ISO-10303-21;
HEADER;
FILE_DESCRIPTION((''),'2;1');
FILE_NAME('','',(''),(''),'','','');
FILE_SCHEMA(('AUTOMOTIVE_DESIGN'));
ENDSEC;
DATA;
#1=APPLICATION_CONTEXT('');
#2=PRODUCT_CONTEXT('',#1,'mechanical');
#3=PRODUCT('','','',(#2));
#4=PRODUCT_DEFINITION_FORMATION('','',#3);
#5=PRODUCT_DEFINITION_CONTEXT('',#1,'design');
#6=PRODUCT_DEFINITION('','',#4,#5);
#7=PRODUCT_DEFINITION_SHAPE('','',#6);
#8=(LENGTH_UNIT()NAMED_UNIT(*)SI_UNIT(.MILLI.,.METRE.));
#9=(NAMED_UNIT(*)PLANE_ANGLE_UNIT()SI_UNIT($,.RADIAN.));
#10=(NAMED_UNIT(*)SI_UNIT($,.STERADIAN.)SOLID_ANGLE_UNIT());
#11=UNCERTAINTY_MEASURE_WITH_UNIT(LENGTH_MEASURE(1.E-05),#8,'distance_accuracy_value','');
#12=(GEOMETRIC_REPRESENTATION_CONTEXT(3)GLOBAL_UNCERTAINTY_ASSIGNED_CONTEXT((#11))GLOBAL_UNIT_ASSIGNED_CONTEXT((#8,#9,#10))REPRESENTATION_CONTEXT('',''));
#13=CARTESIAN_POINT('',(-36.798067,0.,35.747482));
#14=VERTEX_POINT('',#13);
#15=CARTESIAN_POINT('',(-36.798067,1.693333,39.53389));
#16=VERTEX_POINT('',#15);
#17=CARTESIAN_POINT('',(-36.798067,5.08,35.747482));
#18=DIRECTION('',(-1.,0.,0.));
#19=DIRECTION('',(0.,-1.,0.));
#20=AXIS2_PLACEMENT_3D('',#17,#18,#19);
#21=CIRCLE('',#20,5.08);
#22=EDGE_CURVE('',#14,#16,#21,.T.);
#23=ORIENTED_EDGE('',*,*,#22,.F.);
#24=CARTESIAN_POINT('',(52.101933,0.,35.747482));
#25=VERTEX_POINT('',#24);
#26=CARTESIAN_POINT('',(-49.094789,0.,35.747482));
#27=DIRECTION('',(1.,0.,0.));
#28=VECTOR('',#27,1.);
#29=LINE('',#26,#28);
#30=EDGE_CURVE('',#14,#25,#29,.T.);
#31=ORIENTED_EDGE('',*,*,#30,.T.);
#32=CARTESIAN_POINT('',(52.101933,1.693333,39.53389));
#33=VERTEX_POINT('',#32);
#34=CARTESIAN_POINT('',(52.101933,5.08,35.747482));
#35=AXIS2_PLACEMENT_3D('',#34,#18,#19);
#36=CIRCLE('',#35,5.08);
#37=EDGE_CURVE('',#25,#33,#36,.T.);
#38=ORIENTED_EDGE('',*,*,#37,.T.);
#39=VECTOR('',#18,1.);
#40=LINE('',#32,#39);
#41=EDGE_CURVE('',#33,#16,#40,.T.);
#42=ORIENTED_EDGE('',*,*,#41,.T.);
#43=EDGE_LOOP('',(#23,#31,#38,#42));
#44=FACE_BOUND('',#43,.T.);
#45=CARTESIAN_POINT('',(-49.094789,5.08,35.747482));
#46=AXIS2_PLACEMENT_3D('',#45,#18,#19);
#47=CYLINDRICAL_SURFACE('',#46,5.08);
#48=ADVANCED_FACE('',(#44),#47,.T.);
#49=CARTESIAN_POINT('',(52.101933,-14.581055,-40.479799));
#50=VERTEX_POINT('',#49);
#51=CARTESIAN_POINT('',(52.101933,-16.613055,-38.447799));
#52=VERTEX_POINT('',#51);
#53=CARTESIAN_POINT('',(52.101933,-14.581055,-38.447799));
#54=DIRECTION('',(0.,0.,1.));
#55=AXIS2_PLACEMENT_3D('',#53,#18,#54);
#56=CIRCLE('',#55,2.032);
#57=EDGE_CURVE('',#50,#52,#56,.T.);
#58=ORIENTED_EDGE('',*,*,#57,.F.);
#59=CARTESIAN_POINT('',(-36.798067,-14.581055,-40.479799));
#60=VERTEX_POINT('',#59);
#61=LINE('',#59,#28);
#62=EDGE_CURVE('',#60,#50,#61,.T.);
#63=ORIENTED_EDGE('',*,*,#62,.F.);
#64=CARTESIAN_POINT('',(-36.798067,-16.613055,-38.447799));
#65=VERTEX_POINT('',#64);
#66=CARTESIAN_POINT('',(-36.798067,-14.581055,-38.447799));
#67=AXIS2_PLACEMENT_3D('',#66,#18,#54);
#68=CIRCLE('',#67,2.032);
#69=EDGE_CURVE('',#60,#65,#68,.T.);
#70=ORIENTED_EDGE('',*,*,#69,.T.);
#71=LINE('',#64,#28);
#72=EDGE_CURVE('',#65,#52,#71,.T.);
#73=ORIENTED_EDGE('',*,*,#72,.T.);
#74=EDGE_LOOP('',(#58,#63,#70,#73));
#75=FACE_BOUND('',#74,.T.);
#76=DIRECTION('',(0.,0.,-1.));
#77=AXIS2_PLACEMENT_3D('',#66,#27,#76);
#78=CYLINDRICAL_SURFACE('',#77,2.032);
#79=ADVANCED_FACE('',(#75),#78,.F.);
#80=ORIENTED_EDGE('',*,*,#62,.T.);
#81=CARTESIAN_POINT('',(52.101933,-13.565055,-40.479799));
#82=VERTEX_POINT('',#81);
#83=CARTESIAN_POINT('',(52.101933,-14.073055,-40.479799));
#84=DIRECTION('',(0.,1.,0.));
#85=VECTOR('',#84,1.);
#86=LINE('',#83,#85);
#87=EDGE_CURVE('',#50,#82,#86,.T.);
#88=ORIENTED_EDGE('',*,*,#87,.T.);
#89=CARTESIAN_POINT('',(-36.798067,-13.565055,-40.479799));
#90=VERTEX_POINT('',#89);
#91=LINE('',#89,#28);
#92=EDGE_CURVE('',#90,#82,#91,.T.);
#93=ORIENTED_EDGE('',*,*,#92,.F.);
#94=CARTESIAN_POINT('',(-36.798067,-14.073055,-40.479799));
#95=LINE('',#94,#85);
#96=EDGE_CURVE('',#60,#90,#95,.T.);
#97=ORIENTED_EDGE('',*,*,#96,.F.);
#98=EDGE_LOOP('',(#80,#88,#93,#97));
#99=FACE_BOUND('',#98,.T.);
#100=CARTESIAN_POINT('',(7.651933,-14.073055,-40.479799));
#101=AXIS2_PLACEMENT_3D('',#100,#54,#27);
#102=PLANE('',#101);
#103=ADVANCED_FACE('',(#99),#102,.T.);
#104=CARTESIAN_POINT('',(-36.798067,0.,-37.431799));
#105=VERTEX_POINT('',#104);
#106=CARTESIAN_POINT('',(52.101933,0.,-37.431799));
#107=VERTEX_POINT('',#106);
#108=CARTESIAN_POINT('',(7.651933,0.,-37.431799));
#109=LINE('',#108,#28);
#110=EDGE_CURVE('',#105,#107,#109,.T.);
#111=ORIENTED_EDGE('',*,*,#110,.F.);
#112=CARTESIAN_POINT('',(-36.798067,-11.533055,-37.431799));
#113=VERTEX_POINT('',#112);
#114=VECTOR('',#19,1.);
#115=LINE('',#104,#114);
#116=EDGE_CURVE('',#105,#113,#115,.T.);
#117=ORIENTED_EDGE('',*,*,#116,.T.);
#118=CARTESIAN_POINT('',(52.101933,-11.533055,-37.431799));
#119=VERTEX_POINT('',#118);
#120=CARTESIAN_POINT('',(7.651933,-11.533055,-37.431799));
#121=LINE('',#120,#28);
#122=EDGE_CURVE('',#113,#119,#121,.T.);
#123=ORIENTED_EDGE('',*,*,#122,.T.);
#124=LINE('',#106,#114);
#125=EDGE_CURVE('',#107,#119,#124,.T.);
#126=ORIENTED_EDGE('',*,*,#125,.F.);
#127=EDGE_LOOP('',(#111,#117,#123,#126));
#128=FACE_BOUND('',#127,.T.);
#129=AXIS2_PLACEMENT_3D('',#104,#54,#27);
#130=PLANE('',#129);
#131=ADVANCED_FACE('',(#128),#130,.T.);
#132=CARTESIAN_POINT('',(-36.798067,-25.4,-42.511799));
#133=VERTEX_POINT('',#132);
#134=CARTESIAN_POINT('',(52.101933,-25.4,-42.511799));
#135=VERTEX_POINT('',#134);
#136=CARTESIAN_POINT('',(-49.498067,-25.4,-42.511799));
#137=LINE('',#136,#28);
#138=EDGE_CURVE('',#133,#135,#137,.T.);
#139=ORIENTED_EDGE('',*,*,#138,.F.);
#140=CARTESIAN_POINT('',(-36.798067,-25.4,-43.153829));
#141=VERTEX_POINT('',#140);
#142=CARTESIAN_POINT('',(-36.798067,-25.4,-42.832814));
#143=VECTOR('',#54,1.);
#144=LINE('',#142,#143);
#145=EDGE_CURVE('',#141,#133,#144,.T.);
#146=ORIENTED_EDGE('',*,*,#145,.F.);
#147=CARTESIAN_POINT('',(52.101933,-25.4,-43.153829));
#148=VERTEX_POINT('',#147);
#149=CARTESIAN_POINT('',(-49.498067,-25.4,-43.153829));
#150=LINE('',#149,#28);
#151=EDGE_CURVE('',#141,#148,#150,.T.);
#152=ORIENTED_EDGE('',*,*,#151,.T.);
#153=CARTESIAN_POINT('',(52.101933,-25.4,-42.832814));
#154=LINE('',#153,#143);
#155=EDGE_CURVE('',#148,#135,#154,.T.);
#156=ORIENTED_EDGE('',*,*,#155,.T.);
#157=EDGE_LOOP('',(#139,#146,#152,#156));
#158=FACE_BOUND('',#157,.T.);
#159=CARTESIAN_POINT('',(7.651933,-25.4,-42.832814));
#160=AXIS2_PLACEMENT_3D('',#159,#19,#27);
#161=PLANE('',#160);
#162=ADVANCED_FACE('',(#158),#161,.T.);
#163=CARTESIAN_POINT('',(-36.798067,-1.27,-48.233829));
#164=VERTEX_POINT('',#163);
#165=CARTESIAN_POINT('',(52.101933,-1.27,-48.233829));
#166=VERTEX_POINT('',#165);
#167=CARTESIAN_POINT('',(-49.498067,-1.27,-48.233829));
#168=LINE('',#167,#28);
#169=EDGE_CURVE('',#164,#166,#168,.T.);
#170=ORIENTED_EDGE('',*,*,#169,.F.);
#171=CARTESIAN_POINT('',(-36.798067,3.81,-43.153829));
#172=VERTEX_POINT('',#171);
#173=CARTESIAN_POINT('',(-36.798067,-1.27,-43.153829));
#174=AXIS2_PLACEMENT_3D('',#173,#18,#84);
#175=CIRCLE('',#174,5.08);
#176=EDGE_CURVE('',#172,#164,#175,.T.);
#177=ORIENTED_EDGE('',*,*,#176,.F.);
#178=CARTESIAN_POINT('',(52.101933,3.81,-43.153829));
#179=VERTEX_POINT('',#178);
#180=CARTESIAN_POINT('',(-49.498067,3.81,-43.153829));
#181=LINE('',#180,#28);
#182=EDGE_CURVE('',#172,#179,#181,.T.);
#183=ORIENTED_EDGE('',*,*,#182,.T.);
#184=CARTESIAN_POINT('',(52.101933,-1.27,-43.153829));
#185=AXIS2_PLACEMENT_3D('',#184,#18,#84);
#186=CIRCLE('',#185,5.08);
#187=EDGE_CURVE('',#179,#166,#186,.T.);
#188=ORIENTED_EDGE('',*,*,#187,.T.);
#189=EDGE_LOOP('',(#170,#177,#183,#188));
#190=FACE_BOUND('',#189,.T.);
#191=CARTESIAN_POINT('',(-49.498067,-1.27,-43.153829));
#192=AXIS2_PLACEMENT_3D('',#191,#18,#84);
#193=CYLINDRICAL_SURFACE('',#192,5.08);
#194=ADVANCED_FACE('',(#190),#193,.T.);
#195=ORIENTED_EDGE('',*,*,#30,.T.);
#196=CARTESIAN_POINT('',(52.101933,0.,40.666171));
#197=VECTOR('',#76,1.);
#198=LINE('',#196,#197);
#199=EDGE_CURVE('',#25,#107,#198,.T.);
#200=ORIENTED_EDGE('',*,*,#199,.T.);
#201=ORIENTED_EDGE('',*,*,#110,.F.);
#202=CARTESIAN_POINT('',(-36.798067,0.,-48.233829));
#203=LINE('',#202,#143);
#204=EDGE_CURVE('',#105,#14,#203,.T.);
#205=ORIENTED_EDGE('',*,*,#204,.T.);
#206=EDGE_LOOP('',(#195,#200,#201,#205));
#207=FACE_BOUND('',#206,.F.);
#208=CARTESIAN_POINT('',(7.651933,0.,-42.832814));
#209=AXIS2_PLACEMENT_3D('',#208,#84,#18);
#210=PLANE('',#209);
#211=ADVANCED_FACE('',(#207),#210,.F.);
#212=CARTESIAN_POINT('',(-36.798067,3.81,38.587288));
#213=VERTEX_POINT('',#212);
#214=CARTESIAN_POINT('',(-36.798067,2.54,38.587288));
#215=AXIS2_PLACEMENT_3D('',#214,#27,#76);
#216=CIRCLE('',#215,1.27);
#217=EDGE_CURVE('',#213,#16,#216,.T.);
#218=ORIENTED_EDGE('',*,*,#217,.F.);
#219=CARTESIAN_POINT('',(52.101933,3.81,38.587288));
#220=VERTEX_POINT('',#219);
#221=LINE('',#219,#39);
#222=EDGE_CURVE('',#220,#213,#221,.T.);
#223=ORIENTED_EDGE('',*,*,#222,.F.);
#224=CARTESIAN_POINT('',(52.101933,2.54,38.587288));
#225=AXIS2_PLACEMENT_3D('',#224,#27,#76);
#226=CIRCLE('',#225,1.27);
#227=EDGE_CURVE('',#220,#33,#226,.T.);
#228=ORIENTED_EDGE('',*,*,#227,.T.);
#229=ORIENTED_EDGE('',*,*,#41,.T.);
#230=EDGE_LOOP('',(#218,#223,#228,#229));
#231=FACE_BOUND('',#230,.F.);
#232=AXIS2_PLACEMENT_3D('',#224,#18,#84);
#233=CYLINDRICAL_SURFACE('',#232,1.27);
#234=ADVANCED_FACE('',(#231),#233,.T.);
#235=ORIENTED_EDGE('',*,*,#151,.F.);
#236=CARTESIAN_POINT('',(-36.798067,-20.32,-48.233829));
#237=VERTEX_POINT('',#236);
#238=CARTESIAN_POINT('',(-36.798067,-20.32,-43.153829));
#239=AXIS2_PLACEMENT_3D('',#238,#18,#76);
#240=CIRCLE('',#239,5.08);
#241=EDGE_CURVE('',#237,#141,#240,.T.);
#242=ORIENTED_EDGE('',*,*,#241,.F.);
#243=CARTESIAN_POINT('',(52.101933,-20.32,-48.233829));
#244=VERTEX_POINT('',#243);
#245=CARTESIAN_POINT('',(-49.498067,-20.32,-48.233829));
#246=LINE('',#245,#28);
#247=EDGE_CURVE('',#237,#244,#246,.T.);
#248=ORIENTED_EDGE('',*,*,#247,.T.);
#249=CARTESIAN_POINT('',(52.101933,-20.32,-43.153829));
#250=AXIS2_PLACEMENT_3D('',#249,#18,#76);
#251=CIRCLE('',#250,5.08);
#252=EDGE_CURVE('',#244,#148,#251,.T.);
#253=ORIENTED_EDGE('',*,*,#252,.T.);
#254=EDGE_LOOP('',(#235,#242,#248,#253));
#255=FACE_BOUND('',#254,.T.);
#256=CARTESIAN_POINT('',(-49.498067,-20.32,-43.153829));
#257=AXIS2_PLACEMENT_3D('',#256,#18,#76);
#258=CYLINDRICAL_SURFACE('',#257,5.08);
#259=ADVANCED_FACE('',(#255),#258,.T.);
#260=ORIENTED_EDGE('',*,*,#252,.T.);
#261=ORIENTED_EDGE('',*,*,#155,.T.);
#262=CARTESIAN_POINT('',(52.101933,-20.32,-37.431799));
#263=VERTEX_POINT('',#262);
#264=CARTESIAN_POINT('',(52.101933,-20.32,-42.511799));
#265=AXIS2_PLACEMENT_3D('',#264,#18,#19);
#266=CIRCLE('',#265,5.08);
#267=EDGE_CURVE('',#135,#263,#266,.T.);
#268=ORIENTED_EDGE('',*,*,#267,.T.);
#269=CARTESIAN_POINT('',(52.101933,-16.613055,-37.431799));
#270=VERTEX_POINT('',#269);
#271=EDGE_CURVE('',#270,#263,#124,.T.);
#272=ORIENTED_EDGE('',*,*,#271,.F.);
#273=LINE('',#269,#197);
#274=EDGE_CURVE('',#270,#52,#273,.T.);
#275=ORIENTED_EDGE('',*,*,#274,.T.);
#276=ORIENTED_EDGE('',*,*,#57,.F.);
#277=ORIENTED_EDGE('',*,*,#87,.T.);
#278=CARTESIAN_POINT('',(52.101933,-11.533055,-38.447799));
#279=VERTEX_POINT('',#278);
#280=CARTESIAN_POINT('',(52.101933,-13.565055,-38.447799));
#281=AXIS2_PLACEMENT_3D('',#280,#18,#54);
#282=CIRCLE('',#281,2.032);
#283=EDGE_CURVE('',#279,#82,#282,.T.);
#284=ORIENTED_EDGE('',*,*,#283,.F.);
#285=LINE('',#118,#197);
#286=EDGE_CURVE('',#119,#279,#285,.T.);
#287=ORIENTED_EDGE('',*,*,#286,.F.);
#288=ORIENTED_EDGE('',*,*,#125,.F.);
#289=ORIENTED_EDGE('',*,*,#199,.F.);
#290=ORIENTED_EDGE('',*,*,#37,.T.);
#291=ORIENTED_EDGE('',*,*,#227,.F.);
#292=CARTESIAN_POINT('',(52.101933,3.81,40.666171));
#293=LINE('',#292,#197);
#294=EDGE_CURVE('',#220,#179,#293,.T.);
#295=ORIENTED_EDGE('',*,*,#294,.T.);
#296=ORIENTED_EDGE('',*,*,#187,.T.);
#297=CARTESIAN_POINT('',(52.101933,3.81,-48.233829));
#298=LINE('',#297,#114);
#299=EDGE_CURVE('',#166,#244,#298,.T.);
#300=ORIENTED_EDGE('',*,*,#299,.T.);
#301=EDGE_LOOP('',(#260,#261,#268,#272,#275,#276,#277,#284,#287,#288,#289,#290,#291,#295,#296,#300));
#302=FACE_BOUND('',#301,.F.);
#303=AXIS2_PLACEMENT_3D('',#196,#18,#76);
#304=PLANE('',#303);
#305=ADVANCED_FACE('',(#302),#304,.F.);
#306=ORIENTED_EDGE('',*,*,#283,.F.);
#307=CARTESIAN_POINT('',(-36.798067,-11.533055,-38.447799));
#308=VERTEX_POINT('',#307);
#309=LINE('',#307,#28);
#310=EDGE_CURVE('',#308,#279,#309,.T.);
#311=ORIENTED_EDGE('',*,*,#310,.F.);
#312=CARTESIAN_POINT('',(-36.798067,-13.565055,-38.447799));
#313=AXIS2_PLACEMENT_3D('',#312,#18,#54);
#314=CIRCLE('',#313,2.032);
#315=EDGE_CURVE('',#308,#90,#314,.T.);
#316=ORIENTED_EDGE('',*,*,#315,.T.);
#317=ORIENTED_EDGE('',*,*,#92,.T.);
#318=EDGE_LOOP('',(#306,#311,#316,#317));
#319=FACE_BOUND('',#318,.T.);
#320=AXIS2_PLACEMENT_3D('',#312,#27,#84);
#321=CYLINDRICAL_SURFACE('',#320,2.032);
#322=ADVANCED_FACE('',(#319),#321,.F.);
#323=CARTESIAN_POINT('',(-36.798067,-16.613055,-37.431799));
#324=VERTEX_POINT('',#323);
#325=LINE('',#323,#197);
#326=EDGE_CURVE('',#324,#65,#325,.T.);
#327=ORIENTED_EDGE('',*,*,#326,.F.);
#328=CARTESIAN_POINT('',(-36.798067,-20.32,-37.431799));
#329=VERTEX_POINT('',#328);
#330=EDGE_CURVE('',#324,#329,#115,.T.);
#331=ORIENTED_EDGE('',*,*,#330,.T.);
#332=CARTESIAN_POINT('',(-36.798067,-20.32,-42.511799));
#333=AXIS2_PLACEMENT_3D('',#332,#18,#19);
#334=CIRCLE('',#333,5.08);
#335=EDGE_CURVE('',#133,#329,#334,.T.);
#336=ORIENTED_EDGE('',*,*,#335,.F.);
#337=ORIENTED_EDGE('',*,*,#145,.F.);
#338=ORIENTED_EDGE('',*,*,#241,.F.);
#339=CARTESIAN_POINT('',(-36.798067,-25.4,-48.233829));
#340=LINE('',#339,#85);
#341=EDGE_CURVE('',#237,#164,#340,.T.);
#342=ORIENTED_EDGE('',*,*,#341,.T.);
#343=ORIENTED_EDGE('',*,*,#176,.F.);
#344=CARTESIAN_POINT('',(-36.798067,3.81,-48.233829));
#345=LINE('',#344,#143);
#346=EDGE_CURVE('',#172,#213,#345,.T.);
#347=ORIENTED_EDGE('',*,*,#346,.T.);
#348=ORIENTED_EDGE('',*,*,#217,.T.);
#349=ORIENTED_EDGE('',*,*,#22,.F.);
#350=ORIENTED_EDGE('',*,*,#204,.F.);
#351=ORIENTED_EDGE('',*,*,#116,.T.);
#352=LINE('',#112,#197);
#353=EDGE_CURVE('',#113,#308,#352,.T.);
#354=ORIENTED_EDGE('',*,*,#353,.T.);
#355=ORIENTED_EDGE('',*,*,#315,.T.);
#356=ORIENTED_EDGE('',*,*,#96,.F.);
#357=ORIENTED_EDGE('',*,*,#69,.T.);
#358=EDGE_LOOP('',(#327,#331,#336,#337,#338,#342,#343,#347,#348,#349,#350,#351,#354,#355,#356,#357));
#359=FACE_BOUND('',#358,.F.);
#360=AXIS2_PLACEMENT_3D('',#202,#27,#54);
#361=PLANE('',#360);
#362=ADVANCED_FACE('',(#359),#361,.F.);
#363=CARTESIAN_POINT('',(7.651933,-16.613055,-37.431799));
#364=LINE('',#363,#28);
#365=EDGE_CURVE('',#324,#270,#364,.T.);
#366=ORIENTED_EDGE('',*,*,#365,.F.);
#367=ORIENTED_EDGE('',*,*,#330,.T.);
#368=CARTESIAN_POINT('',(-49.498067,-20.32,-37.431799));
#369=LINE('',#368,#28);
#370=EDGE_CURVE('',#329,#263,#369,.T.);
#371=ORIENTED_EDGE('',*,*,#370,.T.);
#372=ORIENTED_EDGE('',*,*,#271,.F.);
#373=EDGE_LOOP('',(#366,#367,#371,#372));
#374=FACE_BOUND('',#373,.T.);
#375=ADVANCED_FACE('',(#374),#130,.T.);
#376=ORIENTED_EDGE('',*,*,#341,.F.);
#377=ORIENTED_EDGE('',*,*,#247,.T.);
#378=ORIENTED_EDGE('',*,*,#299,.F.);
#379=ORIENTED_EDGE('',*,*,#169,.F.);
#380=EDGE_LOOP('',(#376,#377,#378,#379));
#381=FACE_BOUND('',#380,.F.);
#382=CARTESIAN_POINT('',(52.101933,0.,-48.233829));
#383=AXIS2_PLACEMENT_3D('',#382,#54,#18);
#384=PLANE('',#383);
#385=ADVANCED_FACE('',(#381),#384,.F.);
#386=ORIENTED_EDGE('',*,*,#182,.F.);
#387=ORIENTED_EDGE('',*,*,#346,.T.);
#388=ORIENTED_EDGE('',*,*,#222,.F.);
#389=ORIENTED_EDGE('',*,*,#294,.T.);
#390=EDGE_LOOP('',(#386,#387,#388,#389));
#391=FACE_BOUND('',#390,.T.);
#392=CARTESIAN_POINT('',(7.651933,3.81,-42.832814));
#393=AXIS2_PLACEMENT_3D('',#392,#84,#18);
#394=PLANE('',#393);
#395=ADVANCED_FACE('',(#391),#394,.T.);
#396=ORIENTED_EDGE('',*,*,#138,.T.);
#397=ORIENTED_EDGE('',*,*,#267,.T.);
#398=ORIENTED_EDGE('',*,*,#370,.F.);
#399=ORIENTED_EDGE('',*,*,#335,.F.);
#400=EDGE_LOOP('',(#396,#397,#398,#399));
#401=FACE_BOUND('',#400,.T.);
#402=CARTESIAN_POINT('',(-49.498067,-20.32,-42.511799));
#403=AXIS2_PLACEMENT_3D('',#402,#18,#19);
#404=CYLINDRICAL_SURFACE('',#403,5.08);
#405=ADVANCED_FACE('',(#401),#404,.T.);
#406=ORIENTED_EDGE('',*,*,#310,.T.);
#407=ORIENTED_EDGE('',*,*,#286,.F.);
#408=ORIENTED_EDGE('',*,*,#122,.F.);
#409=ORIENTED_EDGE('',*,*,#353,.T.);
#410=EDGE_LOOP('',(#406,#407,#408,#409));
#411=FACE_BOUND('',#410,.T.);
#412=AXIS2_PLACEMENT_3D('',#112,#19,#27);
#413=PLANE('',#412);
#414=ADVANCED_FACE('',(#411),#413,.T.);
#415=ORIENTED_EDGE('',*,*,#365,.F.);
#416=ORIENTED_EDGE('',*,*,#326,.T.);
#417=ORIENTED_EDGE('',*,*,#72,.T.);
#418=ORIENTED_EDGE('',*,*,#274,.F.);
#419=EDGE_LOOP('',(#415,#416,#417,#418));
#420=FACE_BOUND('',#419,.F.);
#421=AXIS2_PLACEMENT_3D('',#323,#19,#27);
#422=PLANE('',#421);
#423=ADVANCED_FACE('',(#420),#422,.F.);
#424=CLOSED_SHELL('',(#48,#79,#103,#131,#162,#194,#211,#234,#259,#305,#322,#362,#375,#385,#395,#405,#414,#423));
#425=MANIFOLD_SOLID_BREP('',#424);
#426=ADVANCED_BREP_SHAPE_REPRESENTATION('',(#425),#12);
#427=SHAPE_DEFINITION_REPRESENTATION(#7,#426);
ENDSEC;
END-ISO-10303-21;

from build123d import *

# Parameters (mm, degrees)
F0_W        = 88.9
F0_H        = 10.8020305634
F1_DEPTH    = 25.4
F3_W        = 88.9
F3_H        = 10.8020305634
F3_H_2      = 78.0979694366
F4_DEPTH    = 3.81
F5_W        = 88.9
F5_H        = 5.08
F6_DEPTH    = 3.048
F7_T1_DEPTH = 113.4934442484
F7_T3_DEPTH = 114.3
F8_R        = 1.27
F9_R        = 2.032


# Not quite as in the source:
# - a fillet or chamfer that OpenCascade refuses, or shapes differently, is made with other operations: its cross-section is extruded or revolved along the edge and cut away or added
# - a feature names something its author has since deleted; it is built from what else it names


with BuildPart() as f1:
    # F0 (on Front) → F1 (new body)
    with BuildSketch(Plane.XZ):
        with Locations((7.6519327545, -42.832814157)):
            Rectangle(F0_W, F0_H)
    extrude(amount=F1_DEPTH)

    # F3 (on face) → F4 (join)
    with BuildSketch(Plane(origin=(0, 0, 0), x_dir=(-1, 0, 0), z_dir=(0, 1, 0))):
        with Locations((-7.6519327545, -42.832814157)):
            Rectangle(F3_W, F3_H)
        with Locations((-7.6519327545, 1.617185843)):
            Rectangle(F3_W, F3_H_2)
    extrude(amount=F4_DEPTH)

    # F5 (on face) → F6 (cut)
    with BuildSketch(Plane.XY.offset(-37.4317988753)):
        with Locations((7.6519327545, -14.0730550206)):
            Rectangle(F5_W, F5_H)
    extrude(amount=-F6_DEPTH, mode=Mode.SUBTRACT)

    # F7: fillet of radius 5.08 on 4 edges, made by hand

    # F7_s2 → F7_t1 (cut)
    with BuildSketch(Plane.YZ.offset(-49.0947893697)):
        with BuildLine():
            ThreePointArc((0, 35.7474817116), (1.0639073716, 38.858333685), (3.81, 40.6661705613))
            Line((3.81, 40.6661705613), (0, 40.6661705613))
            Line((0, 40.6661705613), (0, 35.7474817116))
        make_face()
    extrude(amount=F7_T1_DEPTH, mode=Mode.SUBTRACT)

    # F7_s4 → F7_t3 (cut)
    with BuildSketch(Plane.YZ.offset(-49.4980672455)):
        with BuildLine():
            ThreePointArc((-25.4, -42.5117988753), (-23.9121024484, -38.9196964269), (-20.32, -37.4317988753))
            Line((-20.32, -37.4317988753), (-25.4, -37.4317988753))
            Line((-25.4, -37.4317988753), (-25.4, -42.5117988753))
        make_face()
        with BuildLine():
            ThreePointArc((-20.32, -48.2338294387), (-23.9121024484, -46.7459318871), (-25.4, -43.1538294387))
            Line((-25.4, -43.1538294387), (-25.4, -48.2338294387))
            Line((-25.4, -48.2338294387), (-20.32, -48.2338294387))
        make_face()
        with BuildLine():
            ThreePointArc((3.81, -43.1538294387), (2.3221024484, -46.7459318871), (-1.27, -48.2338294387))
            Line((-1.27, -48.2338294387), (3.81, -48.2338294387))
            Line((3.81, -48.2338294387), (3.81, -43.1538294387))
        make_face()
    extrude(amount=F7_T3_DEPTH, mode=Mode.SUBTRACT)

    # F8
    f8_edges = [f1.edges().sort_by_distance(p)[0] for p in [
        (7.651933, 3.81, 40.666171),
    ]]
    fillet(f8_edges, radius=F8_R)

    # F9
    f9_edges = [f1.edges().sort_by_distance(p)[0] for p in [
        (7.651933, -16.613055, -40.479799),
        (7.651933, -11.533055, -40.479799),
    ]]
    fillet(f9_edges, radius=F9_R)


solid = f1.part
